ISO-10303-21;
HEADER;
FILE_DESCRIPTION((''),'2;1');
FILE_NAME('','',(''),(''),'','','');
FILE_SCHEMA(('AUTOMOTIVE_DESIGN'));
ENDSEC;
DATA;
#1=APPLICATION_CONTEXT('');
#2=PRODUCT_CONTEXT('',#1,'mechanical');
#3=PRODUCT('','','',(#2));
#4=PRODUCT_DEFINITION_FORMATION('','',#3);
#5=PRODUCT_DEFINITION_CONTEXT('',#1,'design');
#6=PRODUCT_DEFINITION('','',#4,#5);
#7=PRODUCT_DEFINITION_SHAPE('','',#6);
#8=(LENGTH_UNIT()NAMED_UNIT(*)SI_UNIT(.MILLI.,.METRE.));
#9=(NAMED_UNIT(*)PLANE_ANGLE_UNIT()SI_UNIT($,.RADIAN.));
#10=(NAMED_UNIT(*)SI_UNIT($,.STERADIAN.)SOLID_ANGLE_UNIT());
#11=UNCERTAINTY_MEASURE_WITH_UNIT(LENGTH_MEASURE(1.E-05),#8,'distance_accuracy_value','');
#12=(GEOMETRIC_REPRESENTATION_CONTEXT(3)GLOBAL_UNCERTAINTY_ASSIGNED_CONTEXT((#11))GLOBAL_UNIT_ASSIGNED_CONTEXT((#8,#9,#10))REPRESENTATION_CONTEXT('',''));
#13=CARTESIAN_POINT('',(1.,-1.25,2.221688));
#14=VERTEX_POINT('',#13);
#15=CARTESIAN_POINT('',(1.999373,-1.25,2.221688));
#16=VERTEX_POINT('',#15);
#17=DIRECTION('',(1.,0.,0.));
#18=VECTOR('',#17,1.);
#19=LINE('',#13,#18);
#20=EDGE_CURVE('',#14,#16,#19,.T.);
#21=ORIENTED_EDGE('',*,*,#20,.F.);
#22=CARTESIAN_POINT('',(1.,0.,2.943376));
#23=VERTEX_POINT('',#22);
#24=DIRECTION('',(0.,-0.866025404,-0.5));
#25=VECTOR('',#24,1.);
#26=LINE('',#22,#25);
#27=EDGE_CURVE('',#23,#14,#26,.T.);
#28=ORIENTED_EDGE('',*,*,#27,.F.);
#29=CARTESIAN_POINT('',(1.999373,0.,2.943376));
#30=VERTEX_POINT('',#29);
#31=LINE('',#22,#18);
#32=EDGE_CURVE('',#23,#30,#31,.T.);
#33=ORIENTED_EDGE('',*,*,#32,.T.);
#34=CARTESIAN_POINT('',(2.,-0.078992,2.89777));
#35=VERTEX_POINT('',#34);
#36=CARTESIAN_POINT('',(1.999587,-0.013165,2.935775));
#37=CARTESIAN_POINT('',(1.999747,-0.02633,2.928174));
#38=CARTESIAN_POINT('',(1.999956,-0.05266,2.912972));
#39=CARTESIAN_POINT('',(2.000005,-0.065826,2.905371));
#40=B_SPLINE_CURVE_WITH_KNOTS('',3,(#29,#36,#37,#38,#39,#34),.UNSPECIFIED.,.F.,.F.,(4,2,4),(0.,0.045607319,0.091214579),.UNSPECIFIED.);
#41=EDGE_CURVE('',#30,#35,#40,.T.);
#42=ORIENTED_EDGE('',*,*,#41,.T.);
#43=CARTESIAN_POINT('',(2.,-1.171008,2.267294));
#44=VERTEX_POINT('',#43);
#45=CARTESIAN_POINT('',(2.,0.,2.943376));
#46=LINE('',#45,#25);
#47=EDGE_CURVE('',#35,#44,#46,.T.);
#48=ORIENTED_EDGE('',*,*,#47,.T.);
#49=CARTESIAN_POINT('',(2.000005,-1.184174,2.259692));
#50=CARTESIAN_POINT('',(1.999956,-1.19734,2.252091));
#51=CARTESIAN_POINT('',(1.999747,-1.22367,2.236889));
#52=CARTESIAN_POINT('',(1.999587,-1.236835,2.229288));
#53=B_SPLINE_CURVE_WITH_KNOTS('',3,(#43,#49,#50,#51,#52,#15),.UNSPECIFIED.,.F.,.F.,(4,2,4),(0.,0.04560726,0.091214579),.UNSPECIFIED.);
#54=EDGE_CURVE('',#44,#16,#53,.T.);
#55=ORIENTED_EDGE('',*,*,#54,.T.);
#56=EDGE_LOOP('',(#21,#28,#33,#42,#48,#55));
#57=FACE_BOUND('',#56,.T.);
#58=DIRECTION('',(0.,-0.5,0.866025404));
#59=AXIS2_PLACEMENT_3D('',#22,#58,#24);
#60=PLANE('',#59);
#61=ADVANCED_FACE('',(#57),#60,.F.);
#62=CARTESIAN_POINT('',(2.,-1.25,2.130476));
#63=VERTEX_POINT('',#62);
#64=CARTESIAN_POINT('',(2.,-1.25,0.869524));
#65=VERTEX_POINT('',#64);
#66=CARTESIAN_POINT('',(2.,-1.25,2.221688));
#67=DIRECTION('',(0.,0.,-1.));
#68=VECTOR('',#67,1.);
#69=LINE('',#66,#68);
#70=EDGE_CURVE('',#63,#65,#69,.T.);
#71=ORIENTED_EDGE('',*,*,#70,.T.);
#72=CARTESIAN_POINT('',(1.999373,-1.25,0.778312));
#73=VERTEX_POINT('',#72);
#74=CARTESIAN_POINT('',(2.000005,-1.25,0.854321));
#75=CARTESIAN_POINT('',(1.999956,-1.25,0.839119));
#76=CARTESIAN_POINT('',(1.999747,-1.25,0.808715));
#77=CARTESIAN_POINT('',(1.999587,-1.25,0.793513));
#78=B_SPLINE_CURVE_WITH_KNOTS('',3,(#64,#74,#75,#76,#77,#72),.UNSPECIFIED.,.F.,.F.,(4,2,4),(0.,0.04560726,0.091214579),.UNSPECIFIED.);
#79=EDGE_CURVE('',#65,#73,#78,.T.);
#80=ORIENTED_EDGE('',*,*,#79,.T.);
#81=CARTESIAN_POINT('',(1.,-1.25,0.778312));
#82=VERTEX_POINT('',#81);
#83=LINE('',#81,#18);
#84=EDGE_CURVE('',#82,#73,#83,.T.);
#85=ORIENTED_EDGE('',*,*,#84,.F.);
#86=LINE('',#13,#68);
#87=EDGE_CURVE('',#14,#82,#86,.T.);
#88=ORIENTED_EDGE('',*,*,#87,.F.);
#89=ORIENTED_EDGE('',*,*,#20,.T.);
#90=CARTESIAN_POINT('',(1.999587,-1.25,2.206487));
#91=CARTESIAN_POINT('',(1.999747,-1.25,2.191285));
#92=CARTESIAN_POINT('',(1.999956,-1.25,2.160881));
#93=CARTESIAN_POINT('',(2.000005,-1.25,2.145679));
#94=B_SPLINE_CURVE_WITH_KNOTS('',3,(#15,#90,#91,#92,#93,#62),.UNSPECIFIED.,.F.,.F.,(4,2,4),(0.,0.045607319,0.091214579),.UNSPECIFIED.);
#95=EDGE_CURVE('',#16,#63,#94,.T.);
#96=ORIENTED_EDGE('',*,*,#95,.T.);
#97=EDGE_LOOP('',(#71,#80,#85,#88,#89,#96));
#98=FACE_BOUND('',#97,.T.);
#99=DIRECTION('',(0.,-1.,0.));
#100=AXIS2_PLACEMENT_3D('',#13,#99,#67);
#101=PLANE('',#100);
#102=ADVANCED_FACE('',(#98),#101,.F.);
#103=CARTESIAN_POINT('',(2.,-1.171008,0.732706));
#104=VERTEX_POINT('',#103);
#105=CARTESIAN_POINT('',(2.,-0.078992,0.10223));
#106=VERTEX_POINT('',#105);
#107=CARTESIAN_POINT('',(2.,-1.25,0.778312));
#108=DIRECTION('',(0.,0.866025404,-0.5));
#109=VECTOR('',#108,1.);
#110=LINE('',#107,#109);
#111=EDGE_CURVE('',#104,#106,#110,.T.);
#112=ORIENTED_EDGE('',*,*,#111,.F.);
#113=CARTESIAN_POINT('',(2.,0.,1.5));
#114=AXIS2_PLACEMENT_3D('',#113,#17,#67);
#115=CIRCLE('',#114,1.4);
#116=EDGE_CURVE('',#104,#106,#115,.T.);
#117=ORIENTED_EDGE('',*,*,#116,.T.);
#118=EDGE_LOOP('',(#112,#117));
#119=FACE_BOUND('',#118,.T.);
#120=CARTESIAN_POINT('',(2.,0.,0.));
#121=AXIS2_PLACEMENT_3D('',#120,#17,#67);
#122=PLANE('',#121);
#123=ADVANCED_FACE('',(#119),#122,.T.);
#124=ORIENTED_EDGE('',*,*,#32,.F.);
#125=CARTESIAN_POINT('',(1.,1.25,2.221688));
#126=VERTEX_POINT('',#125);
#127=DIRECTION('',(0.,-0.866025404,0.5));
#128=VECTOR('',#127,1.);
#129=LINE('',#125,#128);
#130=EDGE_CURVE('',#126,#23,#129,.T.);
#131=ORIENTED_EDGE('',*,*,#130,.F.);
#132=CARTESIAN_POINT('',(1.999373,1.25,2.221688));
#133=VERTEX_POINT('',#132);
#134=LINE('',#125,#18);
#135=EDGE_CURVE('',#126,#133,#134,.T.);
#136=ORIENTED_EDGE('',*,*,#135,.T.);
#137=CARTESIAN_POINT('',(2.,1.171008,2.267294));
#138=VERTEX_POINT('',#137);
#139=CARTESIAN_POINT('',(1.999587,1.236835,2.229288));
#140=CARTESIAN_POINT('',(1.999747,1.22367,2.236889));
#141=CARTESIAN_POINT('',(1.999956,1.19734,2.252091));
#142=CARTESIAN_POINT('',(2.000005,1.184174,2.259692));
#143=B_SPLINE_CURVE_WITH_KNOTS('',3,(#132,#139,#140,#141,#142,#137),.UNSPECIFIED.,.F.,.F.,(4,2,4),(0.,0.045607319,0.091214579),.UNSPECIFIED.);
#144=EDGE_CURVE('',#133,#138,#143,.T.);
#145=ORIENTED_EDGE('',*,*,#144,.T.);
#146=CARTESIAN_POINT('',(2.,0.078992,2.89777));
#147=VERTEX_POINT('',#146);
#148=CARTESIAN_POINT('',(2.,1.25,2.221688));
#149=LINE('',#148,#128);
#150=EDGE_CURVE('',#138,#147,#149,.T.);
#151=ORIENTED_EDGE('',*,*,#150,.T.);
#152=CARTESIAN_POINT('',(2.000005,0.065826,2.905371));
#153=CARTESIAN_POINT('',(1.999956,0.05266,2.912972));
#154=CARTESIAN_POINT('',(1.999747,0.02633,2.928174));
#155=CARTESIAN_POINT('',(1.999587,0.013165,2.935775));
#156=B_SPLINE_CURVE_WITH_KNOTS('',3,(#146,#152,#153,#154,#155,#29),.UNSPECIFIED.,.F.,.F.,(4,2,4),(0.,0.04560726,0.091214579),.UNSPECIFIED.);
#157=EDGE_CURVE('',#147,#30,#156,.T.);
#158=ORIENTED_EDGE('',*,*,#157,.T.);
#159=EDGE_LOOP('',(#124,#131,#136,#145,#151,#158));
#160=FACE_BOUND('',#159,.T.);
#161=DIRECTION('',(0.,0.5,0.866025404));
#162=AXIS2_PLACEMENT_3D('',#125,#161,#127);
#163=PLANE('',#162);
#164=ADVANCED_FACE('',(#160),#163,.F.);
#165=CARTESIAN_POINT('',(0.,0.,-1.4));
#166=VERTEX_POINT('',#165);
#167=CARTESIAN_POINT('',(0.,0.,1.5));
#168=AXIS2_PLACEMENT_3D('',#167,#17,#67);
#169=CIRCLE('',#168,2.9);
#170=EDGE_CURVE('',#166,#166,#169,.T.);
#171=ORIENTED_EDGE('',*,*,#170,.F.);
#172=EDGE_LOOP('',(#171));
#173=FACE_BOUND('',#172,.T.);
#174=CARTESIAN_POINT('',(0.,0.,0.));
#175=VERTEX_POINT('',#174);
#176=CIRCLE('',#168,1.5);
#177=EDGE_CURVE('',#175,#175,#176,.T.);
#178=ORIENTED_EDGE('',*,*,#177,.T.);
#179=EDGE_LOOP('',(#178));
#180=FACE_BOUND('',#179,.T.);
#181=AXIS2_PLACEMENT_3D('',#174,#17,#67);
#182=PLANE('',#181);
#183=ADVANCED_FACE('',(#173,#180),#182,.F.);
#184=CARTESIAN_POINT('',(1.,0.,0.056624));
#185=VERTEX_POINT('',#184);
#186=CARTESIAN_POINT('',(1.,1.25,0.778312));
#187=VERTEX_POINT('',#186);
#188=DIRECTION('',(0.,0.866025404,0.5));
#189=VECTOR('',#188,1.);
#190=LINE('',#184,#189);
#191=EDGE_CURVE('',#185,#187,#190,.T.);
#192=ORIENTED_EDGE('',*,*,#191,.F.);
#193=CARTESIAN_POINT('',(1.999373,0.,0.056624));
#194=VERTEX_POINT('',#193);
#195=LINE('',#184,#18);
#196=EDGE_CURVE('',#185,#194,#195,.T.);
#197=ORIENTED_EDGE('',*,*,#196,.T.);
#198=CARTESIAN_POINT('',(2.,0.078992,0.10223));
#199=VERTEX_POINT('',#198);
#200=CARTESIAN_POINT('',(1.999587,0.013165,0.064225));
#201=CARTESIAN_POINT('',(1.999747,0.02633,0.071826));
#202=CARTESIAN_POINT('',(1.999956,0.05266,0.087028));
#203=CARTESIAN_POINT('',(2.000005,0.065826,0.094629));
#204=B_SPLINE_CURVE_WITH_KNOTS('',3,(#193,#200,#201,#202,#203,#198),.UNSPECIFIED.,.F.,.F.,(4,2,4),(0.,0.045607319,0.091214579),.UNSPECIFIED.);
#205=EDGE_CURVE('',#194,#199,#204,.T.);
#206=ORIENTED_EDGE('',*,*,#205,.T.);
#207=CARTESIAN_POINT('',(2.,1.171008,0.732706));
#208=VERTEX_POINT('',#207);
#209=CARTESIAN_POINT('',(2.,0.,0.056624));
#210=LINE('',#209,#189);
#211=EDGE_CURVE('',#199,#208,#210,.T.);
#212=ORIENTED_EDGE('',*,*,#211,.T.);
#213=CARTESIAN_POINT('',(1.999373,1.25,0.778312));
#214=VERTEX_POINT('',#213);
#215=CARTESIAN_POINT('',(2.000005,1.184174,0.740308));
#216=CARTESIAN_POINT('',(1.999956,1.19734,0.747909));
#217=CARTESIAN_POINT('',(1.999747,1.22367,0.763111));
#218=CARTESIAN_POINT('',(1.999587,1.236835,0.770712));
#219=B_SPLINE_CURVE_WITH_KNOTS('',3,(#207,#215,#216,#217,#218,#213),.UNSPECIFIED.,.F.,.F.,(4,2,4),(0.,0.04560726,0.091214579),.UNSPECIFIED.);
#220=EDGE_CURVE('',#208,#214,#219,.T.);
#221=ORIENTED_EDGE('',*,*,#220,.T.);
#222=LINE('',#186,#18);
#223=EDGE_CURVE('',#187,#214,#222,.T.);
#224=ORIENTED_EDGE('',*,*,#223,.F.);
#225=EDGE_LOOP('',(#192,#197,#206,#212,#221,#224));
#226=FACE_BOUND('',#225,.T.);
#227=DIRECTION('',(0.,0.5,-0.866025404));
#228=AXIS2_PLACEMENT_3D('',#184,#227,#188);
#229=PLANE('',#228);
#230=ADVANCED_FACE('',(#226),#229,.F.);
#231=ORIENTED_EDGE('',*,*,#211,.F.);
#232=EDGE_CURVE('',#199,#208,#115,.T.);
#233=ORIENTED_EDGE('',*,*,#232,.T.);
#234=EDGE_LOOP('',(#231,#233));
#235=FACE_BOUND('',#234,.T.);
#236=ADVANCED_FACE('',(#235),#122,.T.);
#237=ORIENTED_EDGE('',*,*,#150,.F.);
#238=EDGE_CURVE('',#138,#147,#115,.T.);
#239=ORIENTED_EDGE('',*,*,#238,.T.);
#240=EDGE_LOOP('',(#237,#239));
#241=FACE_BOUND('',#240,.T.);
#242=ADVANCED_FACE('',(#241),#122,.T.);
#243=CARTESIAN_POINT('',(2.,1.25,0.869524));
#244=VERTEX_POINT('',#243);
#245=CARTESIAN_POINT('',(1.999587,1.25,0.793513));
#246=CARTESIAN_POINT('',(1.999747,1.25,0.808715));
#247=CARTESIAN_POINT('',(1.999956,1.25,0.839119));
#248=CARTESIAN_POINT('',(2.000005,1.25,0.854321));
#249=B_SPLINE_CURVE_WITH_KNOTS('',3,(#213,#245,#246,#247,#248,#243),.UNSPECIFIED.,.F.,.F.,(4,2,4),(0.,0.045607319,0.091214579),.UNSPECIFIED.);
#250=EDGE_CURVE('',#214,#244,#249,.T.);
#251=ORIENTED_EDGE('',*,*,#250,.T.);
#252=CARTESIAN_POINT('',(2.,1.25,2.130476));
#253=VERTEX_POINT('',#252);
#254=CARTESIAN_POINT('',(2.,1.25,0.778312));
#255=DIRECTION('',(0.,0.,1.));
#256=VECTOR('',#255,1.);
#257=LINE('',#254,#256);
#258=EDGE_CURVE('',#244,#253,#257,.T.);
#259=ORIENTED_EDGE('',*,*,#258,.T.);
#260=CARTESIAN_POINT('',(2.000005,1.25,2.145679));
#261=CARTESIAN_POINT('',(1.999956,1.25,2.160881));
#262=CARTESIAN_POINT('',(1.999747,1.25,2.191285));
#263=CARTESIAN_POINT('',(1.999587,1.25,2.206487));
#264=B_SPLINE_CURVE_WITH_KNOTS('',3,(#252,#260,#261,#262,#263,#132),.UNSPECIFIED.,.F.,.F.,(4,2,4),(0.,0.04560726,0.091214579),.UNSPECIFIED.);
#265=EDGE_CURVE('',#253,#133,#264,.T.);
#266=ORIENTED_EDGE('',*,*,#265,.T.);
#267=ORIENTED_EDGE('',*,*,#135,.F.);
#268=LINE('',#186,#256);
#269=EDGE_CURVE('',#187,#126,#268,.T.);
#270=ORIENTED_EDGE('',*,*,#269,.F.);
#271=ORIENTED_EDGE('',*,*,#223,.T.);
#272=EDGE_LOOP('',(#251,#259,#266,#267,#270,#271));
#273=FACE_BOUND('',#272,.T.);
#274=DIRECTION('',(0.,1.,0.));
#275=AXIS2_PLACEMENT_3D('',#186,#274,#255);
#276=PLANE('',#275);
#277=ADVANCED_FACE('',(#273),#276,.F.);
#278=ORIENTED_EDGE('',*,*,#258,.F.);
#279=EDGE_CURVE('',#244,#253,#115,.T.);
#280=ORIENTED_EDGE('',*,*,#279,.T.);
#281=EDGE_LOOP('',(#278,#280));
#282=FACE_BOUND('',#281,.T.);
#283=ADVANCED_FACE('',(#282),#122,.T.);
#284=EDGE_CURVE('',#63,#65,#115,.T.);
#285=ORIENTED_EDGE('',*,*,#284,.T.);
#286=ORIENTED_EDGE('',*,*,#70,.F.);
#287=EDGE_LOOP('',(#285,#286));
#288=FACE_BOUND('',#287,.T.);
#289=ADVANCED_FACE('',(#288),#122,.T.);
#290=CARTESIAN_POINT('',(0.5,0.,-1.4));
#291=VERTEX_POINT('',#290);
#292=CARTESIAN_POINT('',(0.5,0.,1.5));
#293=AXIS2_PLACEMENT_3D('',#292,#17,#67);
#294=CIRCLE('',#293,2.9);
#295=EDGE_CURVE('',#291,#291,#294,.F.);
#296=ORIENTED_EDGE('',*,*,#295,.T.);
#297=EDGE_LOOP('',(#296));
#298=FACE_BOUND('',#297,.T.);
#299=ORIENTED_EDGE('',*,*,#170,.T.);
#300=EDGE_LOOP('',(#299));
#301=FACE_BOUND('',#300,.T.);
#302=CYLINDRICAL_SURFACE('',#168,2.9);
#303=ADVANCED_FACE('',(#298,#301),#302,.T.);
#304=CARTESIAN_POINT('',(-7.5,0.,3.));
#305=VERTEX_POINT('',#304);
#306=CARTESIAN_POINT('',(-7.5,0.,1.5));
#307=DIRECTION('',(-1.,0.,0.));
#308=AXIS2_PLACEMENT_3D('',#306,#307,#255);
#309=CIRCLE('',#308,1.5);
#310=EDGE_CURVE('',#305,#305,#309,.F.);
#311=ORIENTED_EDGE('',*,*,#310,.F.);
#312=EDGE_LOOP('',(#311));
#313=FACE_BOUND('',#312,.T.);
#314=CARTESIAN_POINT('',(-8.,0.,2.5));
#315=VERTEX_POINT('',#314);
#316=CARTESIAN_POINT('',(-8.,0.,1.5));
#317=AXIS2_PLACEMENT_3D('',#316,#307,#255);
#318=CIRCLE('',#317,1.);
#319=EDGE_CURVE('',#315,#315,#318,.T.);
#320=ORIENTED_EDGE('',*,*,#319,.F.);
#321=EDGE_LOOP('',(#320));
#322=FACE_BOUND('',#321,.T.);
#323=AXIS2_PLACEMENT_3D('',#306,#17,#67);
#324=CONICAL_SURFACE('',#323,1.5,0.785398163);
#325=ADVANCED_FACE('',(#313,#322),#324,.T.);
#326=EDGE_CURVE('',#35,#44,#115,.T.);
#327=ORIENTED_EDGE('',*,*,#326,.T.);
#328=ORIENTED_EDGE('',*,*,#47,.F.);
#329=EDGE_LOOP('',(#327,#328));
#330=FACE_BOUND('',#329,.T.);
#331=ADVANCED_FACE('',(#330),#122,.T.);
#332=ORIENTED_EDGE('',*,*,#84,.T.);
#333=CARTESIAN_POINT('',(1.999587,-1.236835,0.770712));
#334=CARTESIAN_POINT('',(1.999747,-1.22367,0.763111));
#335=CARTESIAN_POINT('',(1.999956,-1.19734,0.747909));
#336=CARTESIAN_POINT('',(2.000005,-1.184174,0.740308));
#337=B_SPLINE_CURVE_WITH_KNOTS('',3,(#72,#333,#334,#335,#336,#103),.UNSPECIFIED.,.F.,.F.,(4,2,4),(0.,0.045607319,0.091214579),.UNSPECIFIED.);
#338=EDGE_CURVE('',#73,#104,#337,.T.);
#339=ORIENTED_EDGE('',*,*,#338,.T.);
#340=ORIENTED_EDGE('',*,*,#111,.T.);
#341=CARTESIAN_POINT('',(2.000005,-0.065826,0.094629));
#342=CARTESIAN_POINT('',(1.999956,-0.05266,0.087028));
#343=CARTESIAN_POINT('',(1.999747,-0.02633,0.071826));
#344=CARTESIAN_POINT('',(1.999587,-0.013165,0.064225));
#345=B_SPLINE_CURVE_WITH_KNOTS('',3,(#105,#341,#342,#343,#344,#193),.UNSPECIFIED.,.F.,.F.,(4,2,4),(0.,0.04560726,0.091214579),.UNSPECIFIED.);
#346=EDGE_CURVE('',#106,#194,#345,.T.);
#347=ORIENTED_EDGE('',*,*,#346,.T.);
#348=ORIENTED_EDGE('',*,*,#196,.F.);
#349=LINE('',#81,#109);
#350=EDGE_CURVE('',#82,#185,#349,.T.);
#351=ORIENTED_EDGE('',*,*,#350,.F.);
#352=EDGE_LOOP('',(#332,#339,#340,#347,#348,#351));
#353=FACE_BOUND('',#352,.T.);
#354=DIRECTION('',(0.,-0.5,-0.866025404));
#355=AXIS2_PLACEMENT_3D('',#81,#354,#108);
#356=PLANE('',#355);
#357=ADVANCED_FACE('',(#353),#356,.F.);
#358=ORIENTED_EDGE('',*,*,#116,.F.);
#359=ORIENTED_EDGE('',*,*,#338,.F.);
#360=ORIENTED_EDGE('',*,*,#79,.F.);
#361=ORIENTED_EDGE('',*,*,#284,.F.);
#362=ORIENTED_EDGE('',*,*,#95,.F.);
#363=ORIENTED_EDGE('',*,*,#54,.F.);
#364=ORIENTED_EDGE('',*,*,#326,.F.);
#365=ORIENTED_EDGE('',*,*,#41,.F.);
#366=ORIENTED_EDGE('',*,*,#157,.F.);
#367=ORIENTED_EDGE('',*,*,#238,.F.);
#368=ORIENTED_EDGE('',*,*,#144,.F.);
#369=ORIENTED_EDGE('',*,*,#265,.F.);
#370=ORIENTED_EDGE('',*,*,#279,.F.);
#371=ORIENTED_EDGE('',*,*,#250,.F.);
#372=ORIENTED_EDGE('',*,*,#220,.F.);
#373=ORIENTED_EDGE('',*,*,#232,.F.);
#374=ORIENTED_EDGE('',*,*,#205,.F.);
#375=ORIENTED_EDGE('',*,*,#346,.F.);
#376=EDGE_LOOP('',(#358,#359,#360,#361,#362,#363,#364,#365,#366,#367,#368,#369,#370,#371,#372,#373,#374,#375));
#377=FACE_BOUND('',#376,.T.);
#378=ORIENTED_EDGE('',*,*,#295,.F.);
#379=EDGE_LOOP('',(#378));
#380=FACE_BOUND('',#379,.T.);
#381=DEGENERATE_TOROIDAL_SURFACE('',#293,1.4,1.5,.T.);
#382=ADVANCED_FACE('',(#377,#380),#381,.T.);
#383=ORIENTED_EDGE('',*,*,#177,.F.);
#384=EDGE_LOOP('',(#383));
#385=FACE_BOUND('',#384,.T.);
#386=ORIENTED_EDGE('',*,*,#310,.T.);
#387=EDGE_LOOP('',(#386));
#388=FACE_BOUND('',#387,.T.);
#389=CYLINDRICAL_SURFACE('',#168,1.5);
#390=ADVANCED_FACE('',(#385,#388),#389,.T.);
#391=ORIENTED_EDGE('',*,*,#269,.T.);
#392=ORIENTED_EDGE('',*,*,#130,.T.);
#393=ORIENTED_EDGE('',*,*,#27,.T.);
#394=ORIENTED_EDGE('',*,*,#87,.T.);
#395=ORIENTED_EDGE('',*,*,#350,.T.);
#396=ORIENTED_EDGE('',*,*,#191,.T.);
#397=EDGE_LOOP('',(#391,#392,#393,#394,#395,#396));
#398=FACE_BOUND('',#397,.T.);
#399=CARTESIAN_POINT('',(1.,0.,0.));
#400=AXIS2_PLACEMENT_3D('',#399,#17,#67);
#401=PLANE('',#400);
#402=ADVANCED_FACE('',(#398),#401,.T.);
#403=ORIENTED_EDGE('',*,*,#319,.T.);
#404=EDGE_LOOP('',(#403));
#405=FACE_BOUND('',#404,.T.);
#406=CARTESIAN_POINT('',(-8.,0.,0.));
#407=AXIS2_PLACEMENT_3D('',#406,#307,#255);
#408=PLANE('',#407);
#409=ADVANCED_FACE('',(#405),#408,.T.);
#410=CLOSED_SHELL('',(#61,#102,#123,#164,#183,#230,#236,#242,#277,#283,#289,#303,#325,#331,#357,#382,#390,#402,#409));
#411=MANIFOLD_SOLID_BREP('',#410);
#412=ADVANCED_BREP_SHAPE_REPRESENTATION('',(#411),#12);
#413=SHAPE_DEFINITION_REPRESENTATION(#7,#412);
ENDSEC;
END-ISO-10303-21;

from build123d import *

# Parameters (mm, degrees)
CUT_EXTRUDE1_DEPTH = 1
FILLET1_R          = 1.5
CHAMFER1_SIZE      = 0.5


with BuildPart() as part:
    # Sketch1 → Revolve1 (revolve)
    with BuildSketch(Plane(origin=(0, 0, 0), x_dir=(1, 0, 0), z_dir=(0, 1, 0))):
        Polygon((0, 0), (-8, -9.8e-16), (-8, -1.500000000000001), (1e-17, -1.5), align=None)
        Polygon((1e-17, 1.3999999999999995), (1e-17, 0), (1e-17, -1.5), (2, -1.5), (2, 1.3999999999999995), align=None)
    revolve(axis=Axis((1e-17, 0, 1.5), (-1, 0, 1.4e-16)))

    # Sketch3 → Cut-Extrude1 (cut)
    with BuildSketch(Plane(origin=(2, 0, -2.7e-16), x_dir=(-1.3e-16, 0, -1), z_dir=(1, 0, -1.3e-16))):
        Polygon((-2.2216878364870323, -1.2500000000000002), (-0.7783121635129678, -1.2500000000000002), (-0.05662432702593554, 0), (-0.7783121635129678, 1.2500000000000002), (-2.2216878364870323, 1.2500000000000004), (-2.9433756729740645, 0), align=None)
    extrude(amount=-CUT_EXTRUDE1_DEPTH, mode=Mode.SUBTRACT)

    # Fillet1
    fillet1_edges = [part.edges().sort_by_distance(p)[0] for p in [
        (2.000000000000001, -3.6e-16, 4.3999999999999995),
    ]]
    fillet(fillet1_edges, radius=FILLET1_R - 0.0001)  # a hair under: the kernel refuses the full size

    # Chamfer1
    chamfer1_edges = [part.edges().sort_by_distance(p)[0] for p in [
        (-8, -1.8e-16, 3.0000000000000013),
    ]]
    chamfer(chamfer1_edges, length=CHAMFER1_SIZE)


solid = part.part
